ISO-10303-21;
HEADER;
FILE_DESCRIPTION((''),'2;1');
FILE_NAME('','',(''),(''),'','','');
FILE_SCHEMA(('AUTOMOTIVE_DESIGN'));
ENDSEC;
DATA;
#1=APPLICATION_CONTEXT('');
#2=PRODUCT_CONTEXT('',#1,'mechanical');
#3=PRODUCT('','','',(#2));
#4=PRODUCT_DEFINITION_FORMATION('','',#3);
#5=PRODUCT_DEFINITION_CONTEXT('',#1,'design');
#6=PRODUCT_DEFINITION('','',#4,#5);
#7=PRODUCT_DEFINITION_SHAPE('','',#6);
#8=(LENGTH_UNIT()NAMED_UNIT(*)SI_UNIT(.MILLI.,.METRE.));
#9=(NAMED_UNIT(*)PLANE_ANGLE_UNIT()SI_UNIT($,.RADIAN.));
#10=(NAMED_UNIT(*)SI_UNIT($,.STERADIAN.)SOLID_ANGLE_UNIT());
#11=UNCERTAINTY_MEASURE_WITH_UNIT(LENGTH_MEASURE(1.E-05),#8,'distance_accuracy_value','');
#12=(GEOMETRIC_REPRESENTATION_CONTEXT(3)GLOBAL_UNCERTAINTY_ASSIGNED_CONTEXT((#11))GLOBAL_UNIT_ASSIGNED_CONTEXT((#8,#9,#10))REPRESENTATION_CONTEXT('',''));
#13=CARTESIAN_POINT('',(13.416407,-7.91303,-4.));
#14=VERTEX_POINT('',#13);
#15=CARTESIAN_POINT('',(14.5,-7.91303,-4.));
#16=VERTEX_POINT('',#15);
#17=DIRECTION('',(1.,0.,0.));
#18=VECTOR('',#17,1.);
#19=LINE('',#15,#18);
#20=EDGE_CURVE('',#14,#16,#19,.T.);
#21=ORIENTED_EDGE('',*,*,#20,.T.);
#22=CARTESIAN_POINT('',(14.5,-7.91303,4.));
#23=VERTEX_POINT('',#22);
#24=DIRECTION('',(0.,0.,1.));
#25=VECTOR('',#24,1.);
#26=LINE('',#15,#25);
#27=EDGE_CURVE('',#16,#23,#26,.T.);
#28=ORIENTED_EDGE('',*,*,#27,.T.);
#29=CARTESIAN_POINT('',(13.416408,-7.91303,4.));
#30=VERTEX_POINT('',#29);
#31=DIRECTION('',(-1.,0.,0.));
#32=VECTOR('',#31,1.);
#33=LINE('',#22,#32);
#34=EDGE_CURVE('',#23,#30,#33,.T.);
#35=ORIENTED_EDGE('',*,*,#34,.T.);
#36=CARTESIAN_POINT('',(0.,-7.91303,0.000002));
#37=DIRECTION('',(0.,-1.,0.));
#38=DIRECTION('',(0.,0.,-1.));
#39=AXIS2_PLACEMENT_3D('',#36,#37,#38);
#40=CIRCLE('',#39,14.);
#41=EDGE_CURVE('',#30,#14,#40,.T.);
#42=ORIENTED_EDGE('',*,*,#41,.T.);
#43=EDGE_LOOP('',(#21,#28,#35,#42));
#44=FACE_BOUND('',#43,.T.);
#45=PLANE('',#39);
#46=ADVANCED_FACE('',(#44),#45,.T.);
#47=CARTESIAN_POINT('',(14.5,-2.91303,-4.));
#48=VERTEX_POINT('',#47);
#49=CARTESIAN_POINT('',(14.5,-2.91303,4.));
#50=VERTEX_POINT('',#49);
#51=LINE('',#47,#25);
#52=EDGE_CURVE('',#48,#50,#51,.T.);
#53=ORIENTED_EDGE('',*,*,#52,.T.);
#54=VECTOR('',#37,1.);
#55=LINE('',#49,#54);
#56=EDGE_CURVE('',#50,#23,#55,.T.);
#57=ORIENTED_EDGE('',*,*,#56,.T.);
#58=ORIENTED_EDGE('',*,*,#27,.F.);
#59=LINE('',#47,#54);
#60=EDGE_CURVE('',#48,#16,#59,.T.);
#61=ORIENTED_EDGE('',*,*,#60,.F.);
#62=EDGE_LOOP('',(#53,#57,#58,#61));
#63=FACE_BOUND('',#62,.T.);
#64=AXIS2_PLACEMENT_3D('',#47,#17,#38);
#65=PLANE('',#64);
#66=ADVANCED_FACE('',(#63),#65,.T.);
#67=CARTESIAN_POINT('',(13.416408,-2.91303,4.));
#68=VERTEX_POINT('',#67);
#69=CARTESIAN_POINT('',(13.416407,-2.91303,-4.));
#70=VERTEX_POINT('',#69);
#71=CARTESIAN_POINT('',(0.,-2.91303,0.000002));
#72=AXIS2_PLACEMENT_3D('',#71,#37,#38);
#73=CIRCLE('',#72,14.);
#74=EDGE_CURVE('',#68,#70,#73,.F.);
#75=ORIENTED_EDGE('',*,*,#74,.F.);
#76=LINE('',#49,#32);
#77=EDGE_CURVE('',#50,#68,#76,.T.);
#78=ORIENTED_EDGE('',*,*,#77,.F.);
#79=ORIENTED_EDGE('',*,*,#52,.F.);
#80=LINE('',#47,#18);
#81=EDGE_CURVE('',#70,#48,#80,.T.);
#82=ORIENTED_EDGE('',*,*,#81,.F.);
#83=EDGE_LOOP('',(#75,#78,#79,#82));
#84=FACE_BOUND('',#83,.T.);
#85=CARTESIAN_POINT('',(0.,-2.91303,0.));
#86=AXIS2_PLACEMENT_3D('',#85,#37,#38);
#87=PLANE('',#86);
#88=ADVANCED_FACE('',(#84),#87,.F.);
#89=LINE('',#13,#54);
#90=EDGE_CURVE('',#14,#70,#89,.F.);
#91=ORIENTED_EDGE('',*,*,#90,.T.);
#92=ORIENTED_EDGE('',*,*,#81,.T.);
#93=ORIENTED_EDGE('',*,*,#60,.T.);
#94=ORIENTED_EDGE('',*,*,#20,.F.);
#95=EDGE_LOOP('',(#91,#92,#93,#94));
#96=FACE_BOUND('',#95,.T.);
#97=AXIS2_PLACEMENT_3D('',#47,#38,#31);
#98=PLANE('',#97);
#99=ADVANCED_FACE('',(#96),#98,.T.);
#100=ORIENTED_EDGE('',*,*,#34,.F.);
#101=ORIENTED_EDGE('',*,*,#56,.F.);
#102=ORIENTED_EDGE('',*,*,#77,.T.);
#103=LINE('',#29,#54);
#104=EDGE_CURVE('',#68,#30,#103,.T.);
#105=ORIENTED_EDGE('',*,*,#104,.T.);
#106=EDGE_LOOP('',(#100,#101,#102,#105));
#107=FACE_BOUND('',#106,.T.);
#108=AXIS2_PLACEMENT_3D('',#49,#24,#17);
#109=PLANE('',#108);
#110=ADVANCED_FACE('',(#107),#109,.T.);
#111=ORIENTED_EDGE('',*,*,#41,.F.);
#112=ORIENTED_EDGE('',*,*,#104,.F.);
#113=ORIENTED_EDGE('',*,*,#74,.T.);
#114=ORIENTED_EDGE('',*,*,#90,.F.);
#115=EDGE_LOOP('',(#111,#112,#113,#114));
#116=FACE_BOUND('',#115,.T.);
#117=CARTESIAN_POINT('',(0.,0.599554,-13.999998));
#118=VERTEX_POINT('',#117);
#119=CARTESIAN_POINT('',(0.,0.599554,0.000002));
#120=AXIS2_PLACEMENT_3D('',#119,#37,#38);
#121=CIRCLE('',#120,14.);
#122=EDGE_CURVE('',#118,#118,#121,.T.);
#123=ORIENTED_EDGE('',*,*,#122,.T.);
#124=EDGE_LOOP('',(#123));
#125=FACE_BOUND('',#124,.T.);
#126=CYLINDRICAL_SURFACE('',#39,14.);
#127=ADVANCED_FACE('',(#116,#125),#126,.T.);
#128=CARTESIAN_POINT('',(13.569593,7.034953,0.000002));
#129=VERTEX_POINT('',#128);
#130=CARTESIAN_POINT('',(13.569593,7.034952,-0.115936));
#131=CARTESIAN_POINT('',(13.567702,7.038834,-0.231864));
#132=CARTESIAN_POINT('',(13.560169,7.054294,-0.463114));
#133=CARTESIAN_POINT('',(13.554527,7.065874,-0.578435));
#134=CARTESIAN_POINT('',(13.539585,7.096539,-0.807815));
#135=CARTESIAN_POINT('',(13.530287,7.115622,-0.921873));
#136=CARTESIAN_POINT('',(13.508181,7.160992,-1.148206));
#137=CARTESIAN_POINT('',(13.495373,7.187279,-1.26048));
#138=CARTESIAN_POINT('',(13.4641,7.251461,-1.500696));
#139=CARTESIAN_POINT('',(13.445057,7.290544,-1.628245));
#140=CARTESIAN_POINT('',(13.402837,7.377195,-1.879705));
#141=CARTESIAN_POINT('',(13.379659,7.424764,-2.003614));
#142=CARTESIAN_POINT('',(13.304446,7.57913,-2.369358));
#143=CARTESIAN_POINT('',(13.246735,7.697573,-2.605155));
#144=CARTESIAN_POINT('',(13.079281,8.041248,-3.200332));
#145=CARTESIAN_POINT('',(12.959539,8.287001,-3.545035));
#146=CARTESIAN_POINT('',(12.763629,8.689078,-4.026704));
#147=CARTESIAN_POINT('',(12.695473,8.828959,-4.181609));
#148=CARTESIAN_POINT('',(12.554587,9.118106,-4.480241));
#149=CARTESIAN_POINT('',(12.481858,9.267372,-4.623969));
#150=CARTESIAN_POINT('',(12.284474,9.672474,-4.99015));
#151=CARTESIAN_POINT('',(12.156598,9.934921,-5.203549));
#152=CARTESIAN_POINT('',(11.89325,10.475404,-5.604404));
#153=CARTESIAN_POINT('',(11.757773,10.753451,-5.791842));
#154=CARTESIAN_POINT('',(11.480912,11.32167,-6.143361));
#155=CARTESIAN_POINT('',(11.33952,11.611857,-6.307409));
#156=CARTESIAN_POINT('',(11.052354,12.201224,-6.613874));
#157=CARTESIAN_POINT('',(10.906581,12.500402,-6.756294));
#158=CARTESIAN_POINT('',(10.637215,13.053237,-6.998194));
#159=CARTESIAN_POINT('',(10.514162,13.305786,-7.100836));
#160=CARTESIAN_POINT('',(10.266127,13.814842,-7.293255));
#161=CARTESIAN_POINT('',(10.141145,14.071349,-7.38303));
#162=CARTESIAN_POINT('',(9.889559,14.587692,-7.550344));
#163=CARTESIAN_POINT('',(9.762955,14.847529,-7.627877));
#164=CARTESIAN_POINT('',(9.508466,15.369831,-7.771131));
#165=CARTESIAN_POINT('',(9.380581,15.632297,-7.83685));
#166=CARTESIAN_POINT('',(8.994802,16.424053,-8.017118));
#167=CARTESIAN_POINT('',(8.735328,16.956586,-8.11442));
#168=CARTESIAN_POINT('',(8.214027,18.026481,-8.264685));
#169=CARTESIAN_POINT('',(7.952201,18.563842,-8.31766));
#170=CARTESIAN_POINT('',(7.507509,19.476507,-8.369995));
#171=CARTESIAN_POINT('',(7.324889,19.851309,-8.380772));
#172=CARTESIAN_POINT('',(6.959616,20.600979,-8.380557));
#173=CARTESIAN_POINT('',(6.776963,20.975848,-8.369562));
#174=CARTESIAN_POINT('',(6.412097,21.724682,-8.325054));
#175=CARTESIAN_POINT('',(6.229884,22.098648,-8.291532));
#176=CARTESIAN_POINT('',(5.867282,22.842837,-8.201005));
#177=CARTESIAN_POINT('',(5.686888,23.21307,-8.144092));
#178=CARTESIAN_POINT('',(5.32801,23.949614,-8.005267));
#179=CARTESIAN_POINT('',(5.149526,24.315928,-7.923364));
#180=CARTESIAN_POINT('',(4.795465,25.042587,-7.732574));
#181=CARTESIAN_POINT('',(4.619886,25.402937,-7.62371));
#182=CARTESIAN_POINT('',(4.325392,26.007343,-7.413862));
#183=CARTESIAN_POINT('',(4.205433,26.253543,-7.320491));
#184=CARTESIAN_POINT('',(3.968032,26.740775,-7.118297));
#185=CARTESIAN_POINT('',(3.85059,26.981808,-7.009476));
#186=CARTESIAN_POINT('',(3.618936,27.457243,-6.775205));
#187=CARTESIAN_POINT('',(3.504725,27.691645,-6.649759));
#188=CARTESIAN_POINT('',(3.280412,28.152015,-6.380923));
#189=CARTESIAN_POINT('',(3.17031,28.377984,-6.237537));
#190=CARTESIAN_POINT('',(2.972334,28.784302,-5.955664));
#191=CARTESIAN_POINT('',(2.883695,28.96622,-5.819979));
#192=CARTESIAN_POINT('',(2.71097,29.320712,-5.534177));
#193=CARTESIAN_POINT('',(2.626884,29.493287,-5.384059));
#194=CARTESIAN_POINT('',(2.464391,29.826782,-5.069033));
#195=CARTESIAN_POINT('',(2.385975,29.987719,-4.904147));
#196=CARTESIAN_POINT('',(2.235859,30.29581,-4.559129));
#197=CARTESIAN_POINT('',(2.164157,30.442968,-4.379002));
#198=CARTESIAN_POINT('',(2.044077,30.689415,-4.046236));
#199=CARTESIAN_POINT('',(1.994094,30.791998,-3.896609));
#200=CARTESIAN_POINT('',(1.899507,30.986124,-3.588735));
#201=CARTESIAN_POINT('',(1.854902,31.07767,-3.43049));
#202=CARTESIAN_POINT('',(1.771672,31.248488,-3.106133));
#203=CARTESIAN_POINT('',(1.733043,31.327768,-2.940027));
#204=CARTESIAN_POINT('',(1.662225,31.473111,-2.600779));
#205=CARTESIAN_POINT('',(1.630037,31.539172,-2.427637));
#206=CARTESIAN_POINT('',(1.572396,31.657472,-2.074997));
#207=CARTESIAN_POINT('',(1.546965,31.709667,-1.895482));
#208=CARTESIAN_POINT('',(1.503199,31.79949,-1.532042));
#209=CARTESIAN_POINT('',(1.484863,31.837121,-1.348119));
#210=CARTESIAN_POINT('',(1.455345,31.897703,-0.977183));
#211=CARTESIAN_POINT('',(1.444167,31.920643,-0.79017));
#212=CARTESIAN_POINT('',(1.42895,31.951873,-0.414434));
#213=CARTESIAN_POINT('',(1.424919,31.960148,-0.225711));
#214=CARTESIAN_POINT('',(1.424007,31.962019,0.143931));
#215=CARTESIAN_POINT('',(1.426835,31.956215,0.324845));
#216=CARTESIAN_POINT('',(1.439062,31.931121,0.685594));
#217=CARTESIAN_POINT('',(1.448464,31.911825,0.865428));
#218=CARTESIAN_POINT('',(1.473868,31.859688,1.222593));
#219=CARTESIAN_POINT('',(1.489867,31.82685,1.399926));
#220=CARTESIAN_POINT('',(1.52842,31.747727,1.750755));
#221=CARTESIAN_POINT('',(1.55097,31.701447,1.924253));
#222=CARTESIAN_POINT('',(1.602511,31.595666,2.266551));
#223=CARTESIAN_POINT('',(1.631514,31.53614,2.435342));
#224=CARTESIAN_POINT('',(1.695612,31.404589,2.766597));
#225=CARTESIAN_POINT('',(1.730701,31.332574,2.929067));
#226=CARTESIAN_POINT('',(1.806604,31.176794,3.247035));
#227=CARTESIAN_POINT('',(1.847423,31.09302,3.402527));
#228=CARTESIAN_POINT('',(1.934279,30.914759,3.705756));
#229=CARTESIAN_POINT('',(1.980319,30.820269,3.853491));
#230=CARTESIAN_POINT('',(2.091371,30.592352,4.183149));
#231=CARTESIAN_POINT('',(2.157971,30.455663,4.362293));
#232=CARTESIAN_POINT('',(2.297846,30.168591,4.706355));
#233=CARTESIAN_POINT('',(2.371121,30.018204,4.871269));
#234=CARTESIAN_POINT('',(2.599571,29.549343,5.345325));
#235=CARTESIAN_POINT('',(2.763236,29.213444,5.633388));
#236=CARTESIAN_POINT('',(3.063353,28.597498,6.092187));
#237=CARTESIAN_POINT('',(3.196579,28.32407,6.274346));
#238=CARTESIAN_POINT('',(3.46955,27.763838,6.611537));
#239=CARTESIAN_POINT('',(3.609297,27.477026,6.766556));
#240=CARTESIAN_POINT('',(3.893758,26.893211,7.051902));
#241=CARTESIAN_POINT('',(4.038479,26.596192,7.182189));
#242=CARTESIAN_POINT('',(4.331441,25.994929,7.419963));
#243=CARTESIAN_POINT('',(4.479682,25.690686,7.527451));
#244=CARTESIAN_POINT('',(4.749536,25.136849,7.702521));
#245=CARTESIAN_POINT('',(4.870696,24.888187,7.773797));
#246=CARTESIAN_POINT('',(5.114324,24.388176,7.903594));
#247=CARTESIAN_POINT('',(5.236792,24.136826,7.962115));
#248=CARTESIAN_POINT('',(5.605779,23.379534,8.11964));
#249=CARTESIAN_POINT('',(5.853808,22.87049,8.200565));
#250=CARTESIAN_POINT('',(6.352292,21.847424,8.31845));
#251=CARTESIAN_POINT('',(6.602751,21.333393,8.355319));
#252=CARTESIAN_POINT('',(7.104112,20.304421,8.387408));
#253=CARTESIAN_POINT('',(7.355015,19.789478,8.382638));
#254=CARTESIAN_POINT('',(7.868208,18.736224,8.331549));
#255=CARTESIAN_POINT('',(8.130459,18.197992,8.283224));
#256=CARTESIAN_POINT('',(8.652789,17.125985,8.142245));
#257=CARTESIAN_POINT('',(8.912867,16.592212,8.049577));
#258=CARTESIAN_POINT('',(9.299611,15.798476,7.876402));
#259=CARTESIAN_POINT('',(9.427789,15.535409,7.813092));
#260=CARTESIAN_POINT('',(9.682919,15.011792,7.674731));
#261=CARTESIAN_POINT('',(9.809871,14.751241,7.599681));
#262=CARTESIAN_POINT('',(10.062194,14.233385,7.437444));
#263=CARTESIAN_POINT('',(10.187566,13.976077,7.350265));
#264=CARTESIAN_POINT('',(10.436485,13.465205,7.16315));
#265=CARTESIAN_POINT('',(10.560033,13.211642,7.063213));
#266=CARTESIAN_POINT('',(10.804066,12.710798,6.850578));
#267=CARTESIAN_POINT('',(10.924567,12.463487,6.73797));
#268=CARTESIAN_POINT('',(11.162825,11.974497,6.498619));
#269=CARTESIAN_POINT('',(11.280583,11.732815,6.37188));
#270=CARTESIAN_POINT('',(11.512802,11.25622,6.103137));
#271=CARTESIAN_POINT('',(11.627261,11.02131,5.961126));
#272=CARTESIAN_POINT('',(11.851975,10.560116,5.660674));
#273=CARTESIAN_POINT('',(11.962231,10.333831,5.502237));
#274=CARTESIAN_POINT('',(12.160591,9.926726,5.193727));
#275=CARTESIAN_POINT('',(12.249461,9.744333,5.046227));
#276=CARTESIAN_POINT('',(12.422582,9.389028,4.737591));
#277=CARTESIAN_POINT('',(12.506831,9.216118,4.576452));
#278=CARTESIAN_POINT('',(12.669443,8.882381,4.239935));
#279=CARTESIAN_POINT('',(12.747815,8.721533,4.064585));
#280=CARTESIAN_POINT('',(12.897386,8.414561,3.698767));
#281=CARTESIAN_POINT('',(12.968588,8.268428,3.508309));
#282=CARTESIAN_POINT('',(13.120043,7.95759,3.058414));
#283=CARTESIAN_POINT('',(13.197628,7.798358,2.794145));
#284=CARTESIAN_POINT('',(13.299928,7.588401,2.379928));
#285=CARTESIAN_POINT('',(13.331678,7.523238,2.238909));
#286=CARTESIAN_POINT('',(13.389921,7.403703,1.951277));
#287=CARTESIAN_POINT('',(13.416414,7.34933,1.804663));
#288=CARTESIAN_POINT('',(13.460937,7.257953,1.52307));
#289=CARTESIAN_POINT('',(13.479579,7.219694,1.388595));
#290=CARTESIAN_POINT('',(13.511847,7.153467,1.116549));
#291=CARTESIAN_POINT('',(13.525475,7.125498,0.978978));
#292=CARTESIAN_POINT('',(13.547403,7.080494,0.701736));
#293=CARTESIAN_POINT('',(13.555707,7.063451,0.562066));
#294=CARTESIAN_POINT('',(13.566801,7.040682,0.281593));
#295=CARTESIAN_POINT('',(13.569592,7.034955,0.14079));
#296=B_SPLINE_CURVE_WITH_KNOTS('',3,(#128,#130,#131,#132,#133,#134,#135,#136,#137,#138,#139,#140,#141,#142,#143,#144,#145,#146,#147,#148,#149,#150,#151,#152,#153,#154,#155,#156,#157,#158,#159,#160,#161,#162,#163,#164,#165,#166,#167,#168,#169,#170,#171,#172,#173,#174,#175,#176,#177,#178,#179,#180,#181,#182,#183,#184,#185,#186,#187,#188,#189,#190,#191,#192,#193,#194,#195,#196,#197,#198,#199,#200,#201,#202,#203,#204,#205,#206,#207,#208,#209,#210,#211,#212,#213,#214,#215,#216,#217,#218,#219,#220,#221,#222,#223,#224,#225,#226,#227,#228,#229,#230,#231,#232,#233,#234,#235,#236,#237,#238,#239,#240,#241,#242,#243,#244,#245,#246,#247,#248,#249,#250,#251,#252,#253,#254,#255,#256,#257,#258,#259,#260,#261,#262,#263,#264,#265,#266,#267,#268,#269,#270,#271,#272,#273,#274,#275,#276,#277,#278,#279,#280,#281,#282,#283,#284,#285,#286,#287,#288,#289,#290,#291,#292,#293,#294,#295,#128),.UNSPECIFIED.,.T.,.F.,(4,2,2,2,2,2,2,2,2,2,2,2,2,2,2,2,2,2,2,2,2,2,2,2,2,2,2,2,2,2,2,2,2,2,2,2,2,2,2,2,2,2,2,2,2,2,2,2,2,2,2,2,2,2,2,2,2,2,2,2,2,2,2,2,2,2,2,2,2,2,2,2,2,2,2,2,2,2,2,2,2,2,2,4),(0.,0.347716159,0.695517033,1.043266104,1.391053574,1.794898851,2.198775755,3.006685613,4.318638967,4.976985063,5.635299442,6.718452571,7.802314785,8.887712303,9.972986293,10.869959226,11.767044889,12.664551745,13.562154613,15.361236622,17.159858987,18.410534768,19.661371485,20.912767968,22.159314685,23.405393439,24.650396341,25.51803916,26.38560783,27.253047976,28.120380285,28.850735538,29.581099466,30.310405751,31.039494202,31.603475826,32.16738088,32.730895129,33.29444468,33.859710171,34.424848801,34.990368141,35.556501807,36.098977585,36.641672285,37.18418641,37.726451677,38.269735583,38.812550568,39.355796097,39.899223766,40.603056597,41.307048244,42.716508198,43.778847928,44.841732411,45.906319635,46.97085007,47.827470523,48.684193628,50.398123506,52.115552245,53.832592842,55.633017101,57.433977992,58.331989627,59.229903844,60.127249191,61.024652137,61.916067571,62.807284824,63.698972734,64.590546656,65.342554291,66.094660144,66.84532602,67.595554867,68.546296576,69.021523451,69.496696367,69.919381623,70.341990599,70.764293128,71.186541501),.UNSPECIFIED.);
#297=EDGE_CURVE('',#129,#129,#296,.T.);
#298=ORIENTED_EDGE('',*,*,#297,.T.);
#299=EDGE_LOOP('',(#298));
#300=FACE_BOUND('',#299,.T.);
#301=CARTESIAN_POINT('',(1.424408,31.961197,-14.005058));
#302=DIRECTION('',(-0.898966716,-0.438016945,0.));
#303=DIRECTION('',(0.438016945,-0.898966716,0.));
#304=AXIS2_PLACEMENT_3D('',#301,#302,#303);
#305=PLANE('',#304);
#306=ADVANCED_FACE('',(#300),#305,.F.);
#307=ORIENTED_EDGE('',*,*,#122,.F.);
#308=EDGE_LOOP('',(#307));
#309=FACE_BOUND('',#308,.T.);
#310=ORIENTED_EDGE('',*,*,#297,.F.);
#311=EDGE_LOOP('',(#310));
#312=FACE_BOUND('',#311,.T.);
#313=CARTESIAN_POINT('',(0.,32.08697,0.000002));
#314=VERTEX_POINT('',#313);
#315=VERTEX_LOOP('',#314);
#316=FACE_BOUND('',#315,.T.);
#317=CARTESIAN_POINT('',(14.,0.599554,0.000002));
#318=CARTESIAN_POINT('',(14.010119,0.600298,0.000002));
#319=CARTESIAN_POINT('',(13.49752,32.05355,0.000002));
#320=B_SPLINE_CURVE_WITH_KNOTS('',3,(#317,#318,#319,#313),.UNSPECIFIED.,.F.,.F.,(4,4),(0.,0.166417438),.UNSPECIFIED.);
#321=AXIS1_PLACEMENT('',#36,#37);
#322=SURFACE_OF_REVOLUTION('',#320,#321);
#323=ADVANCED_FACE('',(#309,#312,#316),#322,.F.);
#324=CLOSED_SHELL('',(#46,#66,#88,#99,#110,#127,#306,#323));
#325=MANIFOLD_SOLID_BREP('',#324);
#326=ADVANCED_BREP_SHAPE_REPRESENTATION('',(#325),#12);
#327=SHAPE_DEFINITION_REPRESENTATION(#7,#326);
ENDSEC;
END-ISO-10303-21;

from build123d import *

# Parameters (mm, degrees)
SCALE2_SCALE           = 2
CUT_EXTRUDE1_START     = 15.280040905
CUT_EXTRUDE1_OUTLINE_W = 31
CUT_EXTRUDE1_OUTLINE_H = 20
CUT_EXTRUDE1_DEPTH     = 3.866864707
SKETCH3_W              = 4
SKETCH3_H              = 8
BOSS_EXTRUDE1_DEPTH    = 5


# Read off the part's stored shape, not the designer's step: Cut-Extrude1
with BuildPart() as part:
    # Sketch1 → Revolve1 (revolve)
    with BuildSketch(Plane.XY, mode=Mode.PRIVATE) as revolve1_sk:
        with BuildLine():
            Line((7, 4.256292026), (7, 0))
            Line((7, 0), (0, 0))
            Line((0, 0), (0, 20))
            add(Edge.make_bspline(
                [(0, 20), (6.748759859, 19.983290112), (7.005059619, 4.256663996), (7, 4.256292026)],
                knots=[0, 0, 0, 0, 0.166417438, 0.166417438, 0.166417438, 0.166417438], degree=3))
        make_face()
    revolve(revolve1_sk.sketch.rotate(Axis((0, 0, 0), (0, 1, 0)), 90), axis=Axis((0, 0, 0), (0, 1, 0)))


with BuildPart() as part_1:
    # Scale2: scaled about (0, 7.913014441, 0)
    add(part.part.scale(SCALE2_SCALE).moved(Location((0, -7.913014441, 0))))

    # Cut-Extrude1 outline → Cut-Extrude1 (cut)
    with BuildSketch(Plane(origin=(0, 0, 0), x_dir=(0.43801694528234036, -0.8989667155381935, 0), z_dir=(0.8989667155381934, 0.4380169452823407, 0)).offset(CUT_EXTRUDE1_START)):
        with Locations((-14.5, 0)):
            Rectangle(CUT_EXTRUDE1_OUTLINE_W, CUT_EXTRUDE1_OUTLINE_H)
    extrude(amount=CUT_EXTRUDE1_DEPTH, mode=Mode.SUBTRACT)

    # Sketch3 → Boss-Extrude1 (add)
    with BuildSketch(Plane(origin=(0, -7.913030029, 0), x_dir=(-1, 0, 0), z_dir=(0, -1, 0))):
        with Locations((-12.5, 0)):
            Rectangle(SKETCH3_W, SKETCH3_H)
    extrude(amount=-BOSS_EXTRUDE1_DEPTH)


solid = part_1.part
